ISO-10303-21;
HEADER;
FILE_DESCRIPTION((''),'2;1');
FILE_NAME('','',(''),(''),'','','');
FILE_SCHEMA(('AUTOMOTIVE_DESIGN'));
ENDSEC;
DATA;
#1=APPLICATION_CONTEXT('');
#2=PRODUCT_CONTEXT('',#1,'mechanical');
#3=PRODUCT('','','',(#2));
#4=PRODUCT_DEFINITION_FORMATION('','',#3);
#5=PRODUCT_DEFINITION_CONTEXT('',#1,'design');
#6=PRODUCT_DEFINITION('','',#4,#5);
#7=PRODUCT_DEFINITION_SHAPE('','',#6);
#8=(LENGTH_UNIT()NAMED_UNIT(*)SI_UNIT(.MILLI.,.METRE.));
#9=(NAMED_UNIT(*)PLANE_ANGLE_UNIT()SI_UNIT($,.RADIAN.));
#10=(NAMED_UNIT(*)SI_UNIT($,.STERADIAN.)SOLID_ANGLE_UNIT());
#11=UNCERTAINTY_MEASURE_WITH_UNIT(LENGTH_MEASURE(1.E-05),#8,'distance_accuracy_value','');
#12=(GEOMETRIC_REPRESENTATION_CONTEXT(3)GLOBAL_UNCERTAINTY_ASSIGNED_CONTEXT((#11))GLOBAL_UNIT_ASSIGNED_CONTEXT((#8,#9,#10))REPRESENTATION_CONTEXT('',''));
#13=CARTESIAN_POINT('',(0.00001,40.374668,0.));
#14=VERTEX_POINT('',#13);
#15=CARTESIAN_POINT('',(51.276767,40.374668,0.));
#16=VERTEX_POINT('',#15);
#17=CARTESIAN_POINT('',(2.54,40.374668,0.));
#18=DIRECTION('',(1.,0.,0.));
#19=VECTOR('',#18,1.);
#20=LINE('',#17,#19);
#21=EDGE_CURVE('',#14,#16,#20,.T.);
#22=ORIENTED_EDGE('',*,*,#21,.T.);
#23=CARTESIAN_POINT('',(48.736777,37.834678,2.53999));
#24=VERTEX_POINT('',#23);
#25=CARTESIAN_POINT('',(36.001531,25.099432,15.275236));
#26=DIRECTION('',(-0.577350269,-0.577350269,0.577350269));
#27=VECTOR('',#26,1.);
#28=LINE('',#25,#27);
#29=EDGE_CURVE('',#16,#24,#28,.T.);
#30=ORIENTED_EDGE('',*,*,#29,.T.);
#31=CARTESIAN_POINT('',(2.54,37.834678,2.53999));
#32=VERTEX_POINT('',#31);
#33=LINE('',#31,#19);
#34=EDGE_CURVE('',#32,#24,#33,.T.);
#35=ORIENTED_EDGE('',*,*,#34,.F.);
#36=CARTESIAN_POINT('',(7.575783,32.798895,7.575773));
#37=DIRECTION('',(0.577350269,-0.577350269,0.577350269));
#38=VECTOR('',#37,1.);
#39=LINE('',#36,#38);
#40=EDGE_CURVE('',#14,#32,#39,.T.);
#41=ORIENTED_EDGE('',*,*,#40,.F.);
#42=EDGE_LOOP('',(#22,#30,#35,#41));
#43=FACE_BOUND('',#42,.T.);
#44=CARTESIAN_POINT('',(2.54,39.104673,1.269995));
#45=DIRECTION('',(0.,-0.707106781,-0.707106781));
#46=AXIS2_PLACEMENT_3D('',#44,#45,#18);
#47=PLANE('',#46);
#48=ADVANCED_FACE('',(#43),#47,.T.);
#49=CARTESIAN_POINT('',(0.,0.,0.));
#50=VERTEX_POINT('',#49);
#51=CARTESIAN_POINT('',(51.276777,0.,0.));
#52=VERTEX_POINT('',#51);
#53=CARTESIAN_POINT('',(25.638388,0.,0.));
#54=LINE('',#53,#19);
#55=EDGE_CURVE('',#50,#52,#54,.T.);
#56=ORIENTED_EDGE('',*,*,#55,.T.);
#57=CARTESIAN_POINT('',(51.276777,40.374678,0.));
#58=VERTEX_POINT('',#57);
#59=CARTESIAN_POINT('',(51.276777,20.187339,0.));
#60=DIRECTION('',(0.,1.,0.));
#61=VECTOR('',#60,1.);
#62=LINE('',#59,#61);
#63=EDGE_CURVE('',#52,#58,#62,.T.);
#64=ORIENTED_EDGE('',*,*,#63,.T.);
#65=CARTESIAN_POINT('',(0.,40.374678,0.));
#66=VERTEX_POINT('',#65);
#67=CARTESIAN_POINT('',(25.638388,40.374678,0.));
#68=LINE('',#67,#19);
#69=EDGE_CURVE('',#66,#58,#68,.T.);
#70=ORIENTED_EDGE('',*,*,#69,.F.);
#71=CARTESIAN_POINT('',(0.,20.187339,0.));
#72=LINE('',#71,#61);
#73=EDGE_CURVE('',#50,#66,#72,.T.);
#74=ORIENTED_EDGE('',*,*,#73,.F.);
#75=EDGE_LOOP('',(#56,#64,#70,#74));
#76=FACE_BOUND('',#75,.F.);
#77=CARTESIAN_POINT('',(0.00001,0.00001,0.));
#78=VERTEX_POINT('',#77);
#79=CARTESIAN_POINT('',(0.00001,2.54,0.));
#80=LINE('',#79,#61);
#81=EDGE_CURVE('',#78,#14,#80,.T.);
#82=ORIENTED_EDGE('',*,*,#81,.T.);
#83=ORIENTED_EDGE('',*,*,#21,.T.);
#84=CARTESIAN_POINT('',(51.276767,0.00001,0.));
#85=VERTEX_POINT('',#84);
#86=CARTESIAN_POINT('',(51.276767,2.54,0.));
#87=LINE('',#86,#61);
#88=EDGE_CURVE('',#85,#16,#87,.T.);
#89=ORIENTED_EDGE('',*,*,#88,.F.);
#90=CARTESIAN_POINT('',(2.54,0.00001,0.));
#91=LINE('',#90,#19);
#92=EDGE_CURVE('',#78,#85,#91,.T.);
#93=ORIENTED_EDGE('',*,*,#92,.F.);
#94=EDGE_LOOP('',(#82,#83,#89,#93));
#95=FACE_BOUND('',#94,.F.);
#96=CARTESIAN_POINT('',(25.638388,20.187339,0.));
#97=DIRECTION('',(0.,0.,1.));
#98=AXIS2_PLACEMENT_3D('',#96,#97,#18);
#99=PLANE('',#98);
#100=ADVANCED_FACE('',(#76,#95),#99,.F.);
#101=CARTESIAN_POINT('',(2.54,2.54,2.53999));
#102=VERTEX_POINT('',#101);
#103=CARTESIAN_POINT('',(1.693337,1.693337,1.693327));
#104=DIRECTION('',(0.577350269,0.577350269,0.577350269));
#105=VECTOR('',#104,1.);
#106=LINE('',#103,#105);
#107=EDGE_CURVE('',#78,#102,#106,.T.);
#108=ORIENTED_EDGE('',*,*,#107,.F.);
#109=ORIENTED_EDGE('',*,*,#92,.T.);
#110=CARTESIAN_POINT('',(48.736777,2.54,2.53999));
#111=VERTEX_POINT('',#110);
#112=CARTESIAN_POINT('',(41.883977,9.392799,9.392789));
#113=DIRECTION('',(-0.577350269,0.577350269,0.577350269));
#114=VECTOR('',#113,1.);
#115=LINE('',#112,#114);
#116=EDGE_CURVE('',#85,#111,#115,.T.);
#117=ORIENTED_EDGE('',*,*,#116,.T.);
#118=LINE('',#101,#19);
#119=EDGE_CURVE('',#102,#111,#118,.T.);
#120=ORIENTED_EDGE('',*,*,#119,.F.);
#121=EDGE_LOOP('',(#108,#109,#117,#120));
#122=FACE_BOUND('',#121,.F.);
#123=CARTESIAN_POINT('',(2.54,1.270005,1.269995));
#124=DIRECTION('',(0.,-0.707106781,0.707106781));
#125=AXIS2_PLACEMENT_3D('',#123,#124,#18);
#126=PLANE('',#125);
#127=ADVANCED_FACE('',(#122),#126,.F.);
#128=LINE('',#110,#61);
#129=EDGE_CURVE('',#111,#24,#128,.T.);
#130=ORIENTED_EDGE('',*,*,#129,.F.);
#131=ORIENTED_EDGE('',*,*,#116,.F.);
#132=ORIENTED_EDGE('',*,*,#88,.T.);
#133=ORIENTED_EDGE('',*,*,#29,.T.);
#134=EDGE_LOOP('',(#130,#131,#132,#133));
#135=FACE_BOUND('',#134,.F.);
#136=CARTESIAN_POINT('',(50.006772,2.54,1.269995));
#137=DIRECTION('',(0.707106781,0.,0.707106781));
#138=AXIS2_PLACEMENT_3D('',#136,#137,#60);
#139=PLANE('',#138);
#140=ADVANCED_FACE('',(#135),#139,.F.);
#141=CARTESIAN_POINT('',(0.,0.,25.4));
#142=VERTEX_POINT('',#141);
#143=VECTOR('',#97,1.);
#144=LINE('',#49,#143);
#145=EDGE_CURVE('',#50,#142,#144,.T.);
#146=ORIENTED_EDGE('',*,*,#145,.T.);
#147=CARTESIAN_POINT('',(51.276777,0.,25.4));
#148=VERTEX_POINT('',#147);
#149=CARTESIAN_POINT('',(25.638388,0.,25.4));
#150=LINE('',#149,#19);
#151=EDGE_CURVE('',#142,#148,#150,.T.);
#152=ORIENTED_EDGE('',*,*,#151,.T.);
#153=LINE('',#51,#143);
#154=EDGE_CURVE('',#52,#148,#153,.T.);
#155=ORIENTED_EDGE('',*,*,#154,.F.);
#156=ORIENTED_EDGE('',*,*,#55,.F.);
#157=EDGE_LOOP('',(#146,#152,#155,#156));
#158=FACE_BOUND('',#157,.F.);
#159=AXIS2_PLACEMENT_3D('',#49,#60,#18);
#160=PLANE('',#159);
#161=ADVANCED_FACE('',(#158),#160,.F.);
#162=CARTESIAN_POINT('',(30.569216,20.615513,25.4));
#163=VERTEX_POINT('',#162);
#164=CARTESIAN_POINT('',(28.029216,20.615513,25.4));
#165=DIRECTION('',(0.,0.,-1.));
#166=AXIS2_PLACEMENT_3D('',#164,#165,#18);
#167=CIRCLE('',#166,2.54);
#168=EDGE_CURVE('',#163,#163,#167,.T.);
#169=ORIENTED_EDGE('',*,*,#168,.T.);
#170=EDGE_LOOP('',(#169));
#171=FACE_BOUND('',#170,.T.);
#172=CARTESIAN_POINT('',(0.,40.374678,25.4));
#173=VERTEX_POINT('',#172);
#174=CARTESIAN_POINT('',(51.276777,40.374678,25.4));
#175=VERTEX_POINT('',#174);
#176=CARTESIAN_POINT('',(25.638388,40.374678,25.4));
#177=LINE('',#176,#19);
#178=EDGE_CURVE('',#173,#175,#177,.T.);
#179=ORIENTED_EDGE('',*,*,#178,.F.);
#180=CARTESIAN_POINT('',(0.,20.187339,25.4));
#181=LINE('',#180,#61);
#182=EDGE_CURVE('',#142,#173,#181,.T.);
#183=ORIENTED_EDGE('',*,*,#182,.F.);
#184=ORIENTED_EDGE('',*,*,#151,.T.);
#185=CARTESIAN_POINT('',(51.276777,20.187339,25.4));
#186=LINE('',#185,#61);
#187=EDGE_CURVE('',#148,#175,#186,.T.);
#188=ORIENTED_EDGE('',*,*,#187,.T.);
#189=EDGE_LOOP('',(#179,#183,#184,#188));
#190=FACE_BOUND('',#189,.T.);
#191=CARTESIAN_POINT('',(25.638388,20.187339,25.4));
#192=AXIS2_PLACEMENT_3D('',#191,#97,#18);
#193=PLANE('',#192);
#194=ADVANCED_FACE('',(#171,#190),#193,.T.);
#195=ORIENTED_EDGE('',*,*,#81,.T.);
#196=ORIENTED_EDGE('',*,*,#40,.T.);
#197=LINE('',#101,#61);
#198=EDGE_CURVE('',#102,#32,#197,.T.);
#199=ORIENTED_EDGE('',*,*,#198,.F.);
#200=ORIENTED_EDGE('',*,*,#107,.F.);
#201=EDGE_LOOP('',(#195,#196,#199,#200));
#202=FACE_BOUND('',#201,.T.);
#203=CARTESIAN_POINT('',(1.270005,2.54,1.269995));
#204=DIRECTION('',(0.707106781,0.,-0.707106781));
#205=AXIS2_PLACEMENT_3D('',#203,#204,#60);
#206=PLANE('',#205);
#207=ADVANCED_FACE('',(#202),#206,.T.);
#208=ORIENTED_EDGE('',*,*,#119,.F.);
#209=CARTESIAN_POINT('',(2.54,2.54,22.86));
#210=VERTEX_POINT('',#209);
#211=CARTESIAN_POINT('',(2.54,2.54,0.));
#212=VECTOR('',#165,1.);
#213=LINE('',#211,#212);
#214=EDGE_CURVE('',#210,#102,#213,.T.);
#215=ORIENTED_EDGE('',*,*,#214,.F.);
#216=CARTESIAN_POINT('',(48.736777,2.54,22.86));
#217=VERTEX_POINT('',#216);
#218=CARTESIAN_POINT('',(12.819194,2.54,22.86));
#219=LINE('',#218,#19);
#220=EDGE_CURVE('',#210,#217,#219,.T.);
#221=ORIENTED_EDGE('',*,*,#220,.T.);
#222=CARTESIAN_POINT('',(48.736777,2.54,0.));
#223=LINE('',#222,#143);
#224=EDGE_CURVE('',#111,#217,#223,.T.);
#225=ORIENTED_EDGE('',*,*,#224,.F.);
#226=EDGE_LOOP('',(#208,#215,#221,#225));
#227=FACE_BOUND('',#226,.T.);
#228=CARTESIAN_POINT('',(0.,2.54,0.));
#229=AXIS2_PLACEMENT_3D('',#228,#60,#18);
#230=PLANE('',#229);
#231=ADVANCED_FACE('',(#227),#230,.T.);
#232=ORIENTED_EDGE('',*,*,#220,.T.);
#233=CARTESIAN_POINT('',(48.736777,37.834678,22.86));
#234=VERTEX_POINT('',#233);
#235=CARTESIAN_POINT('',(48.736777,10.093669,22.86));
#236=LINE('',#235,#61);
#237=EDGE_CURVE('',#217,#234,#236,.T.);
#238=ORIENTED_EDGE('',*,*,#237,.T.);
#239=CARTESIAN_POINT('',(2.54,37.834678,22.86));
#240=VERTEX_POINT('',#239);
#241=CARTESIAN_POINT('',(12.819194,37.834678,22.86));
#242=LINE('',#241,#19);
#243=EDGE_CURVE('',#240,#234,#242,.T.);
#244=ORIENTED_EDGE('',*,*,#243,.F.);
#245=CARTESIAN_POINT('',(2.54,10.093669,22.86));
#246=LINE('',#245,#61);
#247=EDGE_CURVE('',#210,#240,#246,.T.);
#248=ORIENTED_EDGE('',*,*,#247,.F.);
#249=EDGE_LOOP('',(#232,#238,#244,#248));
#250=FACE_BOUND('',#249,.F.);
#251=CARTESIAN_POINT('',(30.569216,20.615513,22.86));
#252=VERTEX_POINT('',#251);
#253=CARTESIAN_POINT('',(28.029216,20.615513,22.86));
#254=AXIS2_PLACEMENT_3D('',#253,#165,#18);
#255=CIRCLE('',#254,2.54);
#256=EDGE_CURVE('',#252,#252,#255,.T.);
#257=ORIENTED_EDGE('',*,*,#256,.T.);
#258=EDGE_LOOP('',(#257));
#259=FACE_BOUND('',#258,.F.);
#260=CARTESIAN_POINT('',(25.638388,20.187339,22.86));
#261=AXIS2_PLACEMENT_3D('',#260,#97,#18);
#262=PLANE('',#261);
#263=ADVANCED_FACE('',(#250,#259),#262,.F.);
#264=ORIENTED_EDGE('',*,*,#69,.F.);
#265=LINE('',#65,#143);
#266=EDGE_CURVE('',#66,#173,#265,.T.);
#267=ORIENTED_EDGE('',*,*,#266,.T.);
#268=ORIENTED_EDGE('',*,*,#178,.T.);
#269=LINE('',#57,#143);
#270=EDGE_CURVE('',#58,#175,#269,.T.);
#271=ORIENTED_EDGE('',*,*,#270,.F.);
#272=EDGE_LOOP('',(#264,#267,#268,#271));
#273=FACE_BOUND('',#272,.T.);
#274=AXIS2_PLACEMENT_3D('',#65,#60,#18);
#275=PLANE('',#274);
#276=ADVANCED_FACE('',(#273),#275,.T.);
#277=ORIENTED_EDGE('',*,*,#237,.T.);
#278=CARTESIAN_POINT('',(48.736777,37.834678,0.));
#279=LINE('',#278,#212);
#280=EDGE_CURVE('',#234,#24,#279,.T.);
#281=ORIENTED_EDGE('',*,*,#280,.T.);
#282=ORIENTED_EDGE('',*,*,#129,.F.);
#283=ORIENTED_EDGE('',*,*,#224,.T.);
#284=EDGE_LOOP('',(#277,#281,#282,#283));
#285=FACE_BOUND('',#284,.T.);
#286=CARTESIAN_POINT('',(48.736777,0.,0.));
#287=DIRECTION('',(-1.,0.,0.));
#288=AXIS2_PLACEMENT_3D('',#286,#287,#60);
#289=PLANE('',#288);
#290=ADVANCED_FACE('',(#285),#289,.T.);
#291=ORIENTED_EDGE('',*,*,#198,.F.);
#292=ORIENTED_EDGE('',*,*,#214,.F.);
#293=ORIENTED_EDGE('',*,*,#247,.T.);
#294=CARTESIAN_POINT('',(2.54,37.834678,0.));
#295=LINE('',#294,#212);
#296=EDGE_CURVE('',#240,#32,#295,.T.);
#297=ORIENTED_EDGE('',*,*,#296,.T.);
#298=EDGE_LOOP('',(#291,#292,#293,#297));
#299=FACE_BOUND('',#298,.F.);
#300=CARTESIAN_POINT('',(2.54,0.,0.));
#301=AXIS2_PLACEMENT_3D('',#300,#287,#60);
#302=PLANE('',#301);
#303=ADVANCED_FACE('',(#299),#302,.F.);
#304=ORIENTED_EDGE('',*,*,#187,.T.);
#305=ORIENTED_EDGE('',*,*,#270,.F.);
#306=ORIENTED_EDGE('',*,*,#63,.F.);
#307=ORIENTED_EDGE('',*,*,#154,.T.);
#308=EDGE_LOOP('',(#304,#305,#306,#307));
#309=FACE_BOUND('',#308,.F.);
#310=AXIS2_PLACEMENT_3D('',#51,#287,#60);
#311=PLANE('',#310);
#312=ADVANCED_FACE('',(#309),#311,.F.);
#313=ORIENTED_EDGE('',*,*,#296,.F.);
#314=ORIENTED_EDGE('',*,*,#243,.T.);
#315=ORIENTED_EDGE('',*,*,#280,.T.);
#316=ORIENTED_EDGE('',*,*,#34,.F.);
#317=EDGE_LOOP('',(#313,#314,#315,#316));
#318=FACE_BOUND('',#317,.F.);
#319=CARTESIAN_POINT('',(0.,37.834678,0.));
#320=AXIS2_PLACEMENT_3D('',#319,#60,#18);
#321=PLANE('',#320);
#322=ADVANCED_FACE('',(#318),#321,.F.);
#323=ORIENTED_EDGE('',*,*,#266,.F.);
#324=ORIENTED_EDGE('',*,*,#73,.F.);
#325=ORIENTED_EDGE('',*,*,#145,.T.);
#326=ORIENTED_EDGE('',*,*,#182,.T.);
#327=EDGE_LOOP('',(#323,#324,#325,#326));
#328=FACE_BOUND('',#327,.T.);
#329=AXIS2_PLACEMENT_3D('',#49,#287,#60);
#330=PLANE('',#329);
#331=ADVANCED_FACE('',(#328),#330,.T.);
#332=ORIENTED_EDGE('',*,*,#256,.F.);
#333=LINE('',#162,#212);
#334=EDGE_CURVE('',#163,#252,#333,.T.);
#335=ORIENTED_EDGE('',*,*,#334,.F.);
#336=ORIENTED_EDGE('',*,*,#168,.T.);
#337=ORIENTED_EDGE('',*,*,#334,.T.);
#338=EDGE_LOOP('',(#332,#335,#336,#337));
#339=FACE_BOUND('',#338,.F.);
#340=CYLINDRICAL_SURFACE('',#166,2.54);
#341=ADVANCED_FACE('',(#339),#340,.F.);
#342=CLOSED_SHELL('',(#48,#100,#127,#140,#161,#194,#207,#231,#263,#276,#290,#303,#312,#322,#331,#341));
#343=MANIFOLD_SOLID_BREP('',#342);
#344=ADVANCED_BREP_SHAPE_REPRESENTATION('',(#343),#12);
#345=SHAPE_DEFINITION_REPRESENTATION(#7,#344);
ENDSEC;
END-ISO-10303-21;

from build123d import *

# Parameters (mm, degrees)
F0_W           = 51.2767769396
F0_H           = 40.3746776283
F1_DEPTH       = 25.4
F2_W           = 14.1758769751
F2_H           = 15.7698839903
F3_DEPTH       = 12.7
F4_T           = -2.54
F5_SIZE        = 2.53999
F7_D           = 2.54
F7_CBORE_D     = 5.08
F7_CBORE_DEPTH = 2.54


# Not quite as in the source:
# - a fillet or chamfer is up to 0.001 mm smaller than in the source, because OpenCascade refuses the exact size


with BuildPart() as f1:
    # F0 (on Top) → F1 (new body)
    with BuildSketch(Plane.XY):
        with Locations((25.6383884698, 20.1873388141)):
            Rectangle(F0_W, F0_H)
    extrude(amount=F1_DEPTH)

    # F2 (on face) → F3 (join)
    with BuildSketch(Plane.XY.offset(25.4)):
        with Locations((19.3085148931, 20.5943360925)):
            Rectangle(F2_W, F2_H)
    extrude(amount=-F3_DEPTH)

    # F4
    f4_openings = [f1.faces().sort_by_distance(p)[0] for p in [
        (25.638388, 20.187339, 0),
    ]]
    offset(amount=F4_T, openings=f4_openings)

    # F5 (size 2.54 in the source; OpenCascade refuses exactly that, so slightly less here)
    f5_edges = [f1.edges().sort_by_distance(p)[0] for p in [
        (2.54, 20.187339, 0),
        (25.638388, 37.834678, 0),
        (48.736777, 20.187339, 0),
        (25.638388, 2.54, 0),
    ]]
    chamfer(f5_edges, length=F5_SIZE)

    # F7 (through all)
    with Locations(Plane(origin=(0, 0, 22.86), x_dir=(1, 0, 0), z_dir=(0, 0, -1))):
        with Locations((28.0292164534, -20.6155125052)):
            CounterBoreHole(F7_D / 2, F7_CBORE_D / 2, F7_CBORE_DEPTH)


solid = f1.part
